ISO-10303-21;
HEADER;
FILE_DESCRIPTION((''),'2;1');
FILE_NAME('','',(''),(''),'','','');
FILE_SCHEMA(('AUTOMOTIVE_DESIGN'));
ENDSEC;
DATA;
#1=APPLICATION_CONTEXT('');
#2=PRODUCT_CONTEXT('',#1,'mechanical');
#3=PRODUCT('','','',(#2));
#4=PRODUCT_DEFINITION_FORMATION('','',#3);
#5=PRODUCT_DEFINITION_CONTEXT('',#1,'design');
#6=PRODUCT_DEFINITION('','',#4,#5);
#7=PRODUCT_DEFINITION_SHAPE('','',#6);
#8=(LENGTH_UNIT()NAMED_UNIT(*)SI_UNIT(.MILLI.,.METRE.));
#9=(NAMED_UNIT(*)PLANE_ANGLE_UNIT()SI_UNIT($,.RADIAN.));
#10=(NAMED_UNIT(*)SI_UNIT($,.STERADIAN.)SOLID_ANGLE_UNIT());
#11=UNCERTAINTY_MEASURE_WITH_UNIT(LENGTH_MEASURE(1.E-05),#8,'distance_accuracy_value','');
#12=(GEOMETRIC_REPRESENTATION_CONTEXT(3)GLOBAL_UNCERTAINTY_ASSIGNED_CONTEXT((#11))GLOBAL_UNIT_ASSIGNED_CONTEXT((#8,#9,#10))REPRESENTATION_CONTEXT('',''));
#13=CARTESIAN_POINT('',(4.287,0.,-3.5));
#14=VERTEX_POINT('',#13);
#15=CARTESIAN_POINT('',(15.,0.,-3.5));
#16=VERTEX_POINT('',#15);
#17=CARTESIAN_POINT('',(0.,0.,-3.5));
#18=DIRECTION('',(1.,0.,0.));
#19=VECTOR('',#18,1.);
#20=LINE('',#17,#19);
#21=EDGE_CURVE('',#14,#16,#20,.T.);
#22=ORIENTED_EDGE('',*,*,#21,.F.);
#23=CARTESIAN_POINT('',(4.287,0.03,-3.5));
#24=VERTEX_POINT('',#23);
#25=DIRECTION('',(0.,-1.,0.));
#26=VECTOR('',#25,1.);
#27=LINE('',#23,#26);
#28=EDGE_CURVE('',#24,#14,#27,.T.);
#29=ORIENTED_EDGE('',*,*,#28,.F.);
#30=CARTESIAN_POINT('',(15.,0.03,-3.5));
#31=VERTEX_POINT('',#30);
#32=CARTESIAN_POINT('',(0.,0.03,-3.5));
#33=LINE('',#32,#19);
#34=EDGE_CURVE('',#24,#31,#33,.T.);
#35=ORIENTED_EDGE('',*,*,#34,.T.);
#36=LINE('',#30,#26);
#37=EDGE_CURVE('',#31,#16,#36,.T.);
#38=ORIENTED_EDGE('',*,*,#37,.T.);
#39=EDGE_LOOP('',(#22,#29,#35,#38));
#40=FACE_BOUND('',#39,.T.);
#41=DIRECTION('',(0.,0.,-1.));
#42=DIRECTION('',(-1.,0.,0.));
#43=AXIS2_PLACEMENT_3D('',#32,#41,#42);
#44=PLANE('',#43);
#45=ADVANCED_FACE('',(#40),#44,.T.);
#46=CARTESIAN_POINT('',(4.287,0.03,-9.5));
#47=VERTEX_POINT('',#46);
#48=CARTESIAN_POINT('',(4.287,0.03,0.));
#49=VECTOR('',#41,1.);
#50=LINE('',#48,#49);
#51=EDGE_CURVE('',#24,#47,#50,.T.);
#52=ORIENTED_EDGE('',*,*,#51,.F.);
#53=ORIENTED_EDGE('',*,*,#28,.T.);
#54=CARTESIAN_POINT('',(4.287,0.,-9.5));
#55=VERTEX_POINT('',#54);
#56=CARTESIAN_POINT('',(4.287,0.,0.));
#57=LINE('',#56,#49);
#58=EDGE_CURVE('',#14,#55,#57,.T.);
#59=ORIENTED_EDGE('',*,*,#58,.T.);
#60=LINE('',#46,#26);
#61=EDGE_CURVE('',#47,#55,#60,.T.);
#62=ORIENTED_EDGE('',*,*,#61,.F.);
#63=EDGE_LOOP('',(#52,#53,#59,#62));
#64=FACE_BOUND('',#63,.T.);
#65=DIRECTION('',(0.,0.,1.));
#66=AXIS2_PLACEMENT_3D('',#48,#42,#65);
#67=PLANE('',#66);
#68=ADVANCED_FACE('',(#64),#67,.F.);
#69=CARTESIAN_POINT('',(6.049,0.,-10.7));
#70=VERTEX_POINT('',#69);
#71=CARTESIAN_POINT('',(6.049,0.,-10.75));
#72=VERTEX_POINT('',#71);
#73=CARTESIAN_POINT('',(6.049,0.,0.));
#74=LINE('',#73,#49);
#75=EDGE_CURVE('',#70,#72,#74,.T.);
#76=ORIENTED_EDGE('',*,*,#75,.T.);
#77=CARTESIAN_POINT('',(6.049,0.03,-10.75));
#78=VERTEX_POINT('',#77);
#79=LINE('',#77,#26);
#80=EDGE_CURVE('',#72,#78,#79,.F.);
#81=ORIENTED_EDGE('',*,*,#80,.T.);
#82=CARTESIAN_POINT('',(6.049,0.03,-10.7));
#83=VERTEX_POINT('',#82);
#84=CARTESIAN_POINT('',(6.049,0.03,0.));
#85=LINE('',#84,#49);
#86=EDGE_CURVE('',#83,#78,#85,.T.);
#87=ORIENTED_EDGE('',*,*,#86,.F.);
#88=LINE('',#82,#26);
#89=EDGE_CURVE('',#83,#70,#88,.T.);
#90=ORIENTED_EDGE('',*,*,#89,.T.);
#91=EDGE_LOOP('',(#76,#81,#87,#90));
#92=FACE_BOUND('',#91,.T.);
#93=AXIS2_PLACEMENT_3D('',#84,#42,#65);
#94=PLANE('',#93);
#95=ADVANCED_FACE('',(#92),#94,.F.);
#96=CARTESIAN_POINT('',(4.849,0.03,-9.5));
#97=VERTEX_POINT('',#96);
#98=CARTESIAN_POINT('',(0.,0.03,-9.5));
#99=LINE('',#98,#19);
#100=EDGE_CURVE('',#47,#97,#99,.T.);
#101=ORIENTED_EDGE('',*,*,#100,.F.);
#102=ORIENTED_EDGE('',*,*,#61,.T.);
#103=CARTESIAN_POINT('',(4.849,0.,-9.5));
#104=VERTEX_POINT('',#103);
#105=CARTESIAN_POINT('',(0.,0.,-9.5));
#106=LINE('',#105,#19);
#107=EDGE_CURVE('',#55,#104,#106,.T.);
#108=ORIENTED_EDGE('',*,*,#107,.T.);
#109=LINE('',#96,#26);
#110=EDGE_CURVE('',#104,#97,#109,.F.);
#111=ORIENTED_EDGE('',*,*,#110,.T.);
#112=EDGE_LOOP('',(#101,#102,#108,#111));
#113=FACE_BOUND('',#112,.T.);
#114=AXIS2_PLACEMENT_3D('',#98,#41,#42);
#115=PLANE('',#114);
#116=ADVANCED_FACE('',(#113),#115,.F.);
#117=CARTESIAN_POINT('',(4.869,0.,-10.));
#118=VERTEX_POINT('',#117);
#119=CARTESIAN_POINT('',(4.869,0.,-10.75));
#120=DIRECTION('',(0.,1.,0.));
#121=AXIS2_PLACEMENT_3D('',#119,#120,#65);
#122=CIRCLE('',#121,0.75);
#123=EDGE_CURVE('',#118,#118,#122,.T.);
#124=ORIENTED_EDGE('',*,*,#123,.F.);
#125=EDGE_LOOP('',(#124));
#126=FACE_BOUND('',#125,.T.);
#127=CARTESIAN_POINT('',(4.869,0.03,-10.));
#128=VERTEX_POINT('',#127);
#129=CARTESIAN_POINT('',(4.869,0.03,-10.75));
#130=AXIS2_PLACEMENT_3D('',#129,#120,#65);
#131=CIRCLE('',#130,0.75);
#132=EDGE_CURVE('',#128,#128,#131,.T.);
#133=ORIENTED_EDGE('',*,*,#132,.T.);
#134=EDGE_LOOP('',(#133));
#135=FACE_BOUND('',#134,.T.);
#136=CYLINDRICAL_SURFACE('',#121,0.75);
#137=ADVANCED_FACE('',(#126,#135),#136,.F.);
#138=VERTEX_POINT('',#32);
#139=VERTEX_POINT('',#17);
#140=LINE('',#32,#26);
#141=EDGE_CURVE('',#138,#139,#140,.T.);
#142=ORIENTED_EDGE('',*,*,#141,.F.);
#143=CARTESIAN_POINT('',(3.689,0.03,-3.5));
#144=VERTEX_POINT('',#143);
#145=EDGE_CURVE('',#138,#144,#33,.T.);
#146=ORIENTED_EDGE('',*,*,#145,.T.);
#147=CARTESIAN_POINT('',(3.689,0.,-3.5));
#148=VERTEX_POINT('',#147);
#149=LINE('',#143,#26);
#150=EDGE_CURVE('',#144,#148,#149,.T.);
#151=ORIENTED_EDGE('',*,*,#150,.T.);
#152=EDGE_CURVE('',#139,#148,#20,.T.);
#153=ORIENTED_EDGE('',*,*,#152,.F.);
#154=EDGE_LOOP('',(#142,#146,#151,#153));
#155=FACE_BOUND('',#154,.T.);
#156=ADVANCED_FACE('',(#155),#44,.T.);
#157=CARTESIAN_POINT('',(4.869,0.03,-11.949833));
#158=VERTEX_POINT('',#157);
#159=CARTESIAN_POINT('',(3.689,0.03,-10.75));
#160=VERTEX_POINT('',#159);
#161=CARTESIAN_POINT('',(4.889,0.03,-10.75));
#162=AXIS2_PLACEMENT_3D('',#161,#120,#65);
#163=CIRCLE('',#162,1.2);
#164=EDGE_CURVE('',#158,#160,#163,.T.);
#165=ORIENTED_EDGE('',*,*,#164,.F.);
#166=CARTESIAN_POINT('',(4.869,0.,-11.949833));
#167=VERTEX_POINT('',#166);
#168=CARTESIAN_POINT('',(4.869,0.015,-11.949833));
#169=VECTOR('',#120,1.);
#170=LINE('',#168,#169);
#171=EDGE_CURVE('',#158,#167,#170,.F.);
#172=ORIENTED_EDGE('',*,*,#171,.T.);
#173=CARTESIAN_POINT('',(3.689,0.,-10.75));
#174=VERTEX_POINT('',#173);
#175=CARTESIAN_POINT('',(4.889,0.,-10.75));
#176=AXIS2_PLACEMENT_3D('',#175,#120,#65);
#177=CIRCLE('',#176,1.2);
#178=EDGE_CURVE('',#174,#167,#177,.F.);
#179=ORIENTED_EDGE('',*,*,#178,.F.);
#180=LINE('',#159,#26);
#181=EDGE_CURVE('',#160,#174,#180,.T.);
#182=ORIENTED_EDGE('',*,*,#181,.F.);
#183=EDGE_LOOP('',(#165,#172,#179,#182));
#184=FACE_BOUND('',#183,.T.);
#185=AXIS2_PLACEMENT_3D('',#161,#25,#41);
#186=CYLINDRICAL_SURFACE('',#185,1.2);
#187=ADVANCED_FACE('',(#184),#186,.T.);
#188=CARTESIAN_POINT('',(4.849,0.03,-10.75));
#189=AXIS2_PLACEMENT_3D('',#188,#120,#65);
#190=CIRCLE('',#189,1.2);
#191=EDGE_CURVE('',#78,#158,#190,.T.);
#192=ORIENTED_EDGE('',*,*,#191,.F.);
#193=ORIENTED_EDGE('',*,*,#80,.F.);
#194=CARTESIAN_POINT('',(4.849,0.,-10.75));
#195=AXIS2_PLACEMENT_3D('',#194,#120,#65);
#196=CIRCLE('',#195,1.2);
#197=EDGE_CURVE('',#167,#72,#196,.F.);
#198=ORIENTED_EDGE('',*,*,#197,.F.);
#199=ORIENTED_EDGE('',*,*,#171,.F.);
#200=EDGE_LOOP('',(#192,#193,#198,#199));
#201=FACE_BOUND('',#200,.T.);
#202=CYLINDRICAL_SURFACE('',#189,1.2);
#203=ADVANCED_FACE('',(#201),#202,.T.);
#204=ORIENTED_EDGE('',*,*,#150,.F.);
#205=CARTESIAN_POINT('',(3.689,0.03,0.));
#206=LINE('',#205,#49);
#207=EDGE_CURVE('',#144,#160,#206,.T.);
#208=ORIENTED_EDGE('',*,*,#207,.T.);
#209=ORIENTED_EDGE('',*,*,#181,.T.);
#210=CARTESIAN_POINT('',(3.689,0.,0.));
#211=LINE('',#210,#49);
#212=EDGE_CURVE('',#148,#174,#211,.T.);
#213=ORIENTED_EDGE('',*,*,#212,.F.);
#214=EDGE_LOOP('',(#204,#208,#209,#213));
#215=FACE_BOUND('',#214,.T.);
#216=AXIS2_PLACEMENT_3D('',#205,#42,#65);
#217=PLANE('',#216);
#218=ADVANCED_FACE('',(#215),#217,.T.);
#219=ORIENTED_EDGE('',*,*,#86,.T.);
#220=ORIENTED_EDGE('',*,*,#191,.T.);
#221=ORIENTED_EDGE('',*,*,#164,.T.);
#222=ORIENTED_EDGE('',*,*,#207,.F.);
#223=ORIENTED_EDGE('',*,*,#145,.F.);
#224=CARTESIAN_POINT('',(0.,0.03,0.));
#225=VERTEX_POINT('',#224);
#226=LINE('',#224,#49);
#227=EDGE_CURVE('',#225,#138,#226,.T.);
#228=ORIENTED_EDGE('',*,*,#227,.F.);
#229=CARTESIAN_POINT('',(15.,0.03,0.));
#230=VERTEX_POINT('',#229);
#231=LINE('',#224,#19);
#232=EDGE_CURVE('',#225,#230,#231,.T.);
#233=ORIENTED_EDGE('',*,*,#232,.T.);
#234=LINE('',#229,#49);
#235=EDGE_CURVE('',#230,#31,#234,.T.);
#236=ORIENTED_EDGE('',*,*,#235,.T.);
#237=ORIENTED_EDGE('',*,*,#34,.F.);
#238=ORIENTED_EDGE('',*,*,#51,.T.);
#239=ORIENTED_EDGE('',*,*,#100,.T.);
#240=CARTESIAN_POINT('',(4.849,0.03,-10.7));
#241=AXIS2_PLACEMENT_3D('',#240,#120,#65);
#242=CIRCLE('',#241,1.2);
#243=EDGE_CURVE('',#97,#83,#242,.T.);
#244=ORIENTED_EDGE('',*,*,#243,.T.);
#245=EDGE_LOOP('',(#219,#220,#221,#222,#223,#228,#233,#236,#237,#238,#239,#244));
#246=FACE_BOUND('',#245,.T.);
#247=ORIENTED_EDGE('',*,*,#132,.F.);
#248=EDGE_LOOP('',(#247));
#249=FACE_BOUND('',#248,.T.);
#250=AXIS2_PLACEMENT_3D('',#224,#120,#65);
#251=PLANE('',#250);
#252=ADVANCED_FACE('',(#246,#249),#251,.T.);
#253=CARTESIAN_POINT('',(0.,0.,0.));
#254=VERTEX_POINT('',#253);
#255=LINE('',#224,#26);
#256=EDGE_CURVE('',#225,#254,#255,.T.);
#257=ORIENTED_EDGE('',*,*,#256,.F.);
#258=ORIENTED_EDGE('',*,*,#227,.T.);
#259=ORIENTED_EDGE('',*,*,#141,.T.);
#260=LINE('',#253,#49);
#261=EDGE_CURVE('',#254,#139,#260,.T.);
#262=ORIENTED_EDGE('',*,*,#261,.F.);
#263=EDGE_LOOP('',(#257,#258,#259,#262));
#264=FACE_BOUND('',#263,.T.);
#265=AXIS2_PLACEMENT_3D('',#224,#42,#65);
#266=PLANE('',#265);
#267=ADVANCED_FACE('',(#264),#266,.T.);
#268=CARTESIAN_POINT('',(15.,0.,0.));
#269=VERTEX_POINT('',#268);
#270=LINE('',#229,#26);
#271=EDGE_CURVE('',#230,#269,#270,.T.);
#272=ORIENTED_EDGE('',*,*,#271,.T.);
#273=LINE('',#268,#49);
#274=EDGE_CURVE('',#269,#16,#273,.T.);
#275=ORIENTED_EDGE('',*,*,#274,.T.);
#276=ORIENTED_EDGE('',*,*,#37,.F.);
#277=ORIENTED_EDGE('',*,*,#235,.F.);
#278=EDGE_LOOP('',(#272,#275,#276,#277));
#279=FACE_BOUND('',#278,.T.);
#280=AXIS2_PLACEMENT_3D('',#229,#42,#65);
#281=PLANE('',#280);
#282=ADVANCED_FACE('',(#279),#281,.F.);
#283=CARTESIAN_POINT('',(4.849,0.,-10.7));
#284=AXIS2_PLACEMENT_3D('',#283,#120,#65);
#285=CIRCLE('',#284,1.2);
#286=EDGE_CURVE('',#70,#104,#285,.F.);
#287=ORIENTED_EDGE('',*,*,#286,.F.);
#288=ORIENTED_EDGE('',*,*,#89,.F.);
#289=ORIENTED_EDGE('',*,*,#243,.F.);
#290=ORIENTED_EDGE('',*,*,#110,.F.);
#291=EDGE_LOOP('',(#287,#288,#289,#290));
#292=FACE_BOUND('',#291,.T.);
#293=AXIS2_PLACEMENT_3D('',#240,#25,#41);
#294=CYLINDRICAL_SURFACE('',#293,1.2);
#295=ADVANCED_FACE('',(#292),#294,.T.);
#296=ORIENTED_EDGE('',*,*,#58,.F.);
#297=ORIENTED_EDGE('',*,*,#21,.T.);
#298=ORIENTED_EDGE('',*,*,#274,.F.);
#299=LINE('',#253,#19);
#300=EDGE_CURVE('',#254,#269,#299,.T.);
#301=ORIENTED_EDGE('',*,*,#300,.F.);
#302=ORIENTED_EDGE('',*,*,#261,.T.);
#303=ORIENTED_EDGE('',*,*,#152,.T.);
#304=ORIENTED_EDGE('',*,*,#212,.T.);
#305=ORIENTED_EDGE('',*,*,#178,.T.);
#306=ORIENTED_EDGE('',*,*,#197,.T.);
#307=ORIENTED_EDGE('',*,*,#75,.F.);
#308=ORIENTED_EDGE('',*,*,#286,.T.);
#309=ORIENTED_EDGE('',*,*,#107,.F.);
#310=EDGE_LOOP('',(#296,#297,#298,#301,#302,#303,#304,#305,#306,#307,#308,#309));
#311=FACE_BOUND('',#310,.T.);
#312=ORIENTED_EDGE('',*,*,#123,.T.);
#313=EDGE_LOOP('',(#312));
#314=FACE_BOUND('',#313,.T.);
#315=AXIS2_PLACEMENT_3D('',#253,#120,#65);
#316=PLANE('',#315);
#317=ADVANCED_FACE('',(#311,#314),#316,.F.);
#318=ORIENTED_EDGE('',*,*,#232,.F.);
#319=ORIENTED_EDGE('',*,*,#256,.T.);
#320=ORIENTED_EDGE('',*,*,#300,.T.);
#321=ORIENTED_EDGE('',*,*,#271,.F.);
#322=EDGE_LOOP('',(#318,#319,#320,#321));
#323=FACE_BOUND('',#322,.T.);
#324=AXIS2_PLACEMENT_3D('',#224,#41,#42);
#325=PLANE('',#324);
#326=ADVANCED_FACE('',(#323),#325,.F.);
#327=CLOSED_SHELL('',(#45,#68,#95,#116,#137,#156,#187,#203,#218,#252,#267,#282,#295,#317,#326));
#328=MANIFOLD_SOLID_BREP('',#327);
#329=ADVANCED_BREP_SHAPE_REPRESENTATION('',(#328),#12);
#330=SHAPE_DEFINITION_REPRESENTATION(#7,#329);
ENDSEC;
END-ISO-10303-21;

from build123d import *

# Parameters (mm, degrees)
SKETCH1_W           = 15
SKETCH1_H           = 3.5
SKETCH1_W_2         = 0.598
SKETCH1_H_2         = 6
BOSS_EXTRUDE1_DEPTH = 0.03
FILLET1_R           = 1.2
SKETCH2_R           = 0.75
CUT_EXTRUDE1_DEPTH  = 1


with BuildPart() as part:
    # Sketch1 → Boss-Extrude1 (new body)
    with BuildSketch(Plane(origin=(0, 0, 0), x_dir=(1, 0, 0), z_dir=(0, 1, 0))):
        with Locations((7.5, 1.75)):
            Rectangle(SKETCH1_W, SKETCH1_H)
        with Locations((3.988, 6.5)):
            Rectangle(SKETCH1_W_2, SKETCH1_H_2)
        Polygon((3.689, 11.95), (3.689, 9.5), (4.287, 9.5), (6.049, 9.5), (6.049, 11.95), align=None)
    extrude(amount=BOSS_EXTRUDE1_DEPTH)

    # Fillet1
    # the kernel refuses this fillet: 1.2 mm, written as the material it takes off along each edge
    with BuildSketch(Plane(origin=(3.689, -3, -11.95), x_dir=(0, 0, 1), z_dir=(0, 1, 0)), Plane(origin=(6.049, -3, -11.95), x_dir=(-1, 0, 0), z_dir=(0, 1, 0)), Plane(origin=(6.049, -3, -9.5), x_dir=(0, 0, -1), z_dir=(0, 1, 0))) as fillet1_piece_1:
        with BuildLine():
            CenterArc((FILLET1_R, FILLET1_R), FILLET1_R, 180, 90)
            Line((0, FILLET1_R), (0, 0))
            Line((0, 0), (FILLET1_R, 0))
        make_face()
    extrude(amount=6.03, mode=Mode.SUBTRACT)

    # Sketch2 → Cut-Extrude1 (cut)
    with BuildSketch(Plane(origin=(0, 0.03, 0), x_dir=(1, 0, 0), z_dir=(0, 1, 0))):
        with Locations(Location((4.869, 10.75, 0), (0, 0, 270))):
            Circle(SKETCH2_R)
    extrude(amount=-CUT_EXTRUDE1_DEPTH, mode=Mode.SUBTRACT)


solid = part.part
